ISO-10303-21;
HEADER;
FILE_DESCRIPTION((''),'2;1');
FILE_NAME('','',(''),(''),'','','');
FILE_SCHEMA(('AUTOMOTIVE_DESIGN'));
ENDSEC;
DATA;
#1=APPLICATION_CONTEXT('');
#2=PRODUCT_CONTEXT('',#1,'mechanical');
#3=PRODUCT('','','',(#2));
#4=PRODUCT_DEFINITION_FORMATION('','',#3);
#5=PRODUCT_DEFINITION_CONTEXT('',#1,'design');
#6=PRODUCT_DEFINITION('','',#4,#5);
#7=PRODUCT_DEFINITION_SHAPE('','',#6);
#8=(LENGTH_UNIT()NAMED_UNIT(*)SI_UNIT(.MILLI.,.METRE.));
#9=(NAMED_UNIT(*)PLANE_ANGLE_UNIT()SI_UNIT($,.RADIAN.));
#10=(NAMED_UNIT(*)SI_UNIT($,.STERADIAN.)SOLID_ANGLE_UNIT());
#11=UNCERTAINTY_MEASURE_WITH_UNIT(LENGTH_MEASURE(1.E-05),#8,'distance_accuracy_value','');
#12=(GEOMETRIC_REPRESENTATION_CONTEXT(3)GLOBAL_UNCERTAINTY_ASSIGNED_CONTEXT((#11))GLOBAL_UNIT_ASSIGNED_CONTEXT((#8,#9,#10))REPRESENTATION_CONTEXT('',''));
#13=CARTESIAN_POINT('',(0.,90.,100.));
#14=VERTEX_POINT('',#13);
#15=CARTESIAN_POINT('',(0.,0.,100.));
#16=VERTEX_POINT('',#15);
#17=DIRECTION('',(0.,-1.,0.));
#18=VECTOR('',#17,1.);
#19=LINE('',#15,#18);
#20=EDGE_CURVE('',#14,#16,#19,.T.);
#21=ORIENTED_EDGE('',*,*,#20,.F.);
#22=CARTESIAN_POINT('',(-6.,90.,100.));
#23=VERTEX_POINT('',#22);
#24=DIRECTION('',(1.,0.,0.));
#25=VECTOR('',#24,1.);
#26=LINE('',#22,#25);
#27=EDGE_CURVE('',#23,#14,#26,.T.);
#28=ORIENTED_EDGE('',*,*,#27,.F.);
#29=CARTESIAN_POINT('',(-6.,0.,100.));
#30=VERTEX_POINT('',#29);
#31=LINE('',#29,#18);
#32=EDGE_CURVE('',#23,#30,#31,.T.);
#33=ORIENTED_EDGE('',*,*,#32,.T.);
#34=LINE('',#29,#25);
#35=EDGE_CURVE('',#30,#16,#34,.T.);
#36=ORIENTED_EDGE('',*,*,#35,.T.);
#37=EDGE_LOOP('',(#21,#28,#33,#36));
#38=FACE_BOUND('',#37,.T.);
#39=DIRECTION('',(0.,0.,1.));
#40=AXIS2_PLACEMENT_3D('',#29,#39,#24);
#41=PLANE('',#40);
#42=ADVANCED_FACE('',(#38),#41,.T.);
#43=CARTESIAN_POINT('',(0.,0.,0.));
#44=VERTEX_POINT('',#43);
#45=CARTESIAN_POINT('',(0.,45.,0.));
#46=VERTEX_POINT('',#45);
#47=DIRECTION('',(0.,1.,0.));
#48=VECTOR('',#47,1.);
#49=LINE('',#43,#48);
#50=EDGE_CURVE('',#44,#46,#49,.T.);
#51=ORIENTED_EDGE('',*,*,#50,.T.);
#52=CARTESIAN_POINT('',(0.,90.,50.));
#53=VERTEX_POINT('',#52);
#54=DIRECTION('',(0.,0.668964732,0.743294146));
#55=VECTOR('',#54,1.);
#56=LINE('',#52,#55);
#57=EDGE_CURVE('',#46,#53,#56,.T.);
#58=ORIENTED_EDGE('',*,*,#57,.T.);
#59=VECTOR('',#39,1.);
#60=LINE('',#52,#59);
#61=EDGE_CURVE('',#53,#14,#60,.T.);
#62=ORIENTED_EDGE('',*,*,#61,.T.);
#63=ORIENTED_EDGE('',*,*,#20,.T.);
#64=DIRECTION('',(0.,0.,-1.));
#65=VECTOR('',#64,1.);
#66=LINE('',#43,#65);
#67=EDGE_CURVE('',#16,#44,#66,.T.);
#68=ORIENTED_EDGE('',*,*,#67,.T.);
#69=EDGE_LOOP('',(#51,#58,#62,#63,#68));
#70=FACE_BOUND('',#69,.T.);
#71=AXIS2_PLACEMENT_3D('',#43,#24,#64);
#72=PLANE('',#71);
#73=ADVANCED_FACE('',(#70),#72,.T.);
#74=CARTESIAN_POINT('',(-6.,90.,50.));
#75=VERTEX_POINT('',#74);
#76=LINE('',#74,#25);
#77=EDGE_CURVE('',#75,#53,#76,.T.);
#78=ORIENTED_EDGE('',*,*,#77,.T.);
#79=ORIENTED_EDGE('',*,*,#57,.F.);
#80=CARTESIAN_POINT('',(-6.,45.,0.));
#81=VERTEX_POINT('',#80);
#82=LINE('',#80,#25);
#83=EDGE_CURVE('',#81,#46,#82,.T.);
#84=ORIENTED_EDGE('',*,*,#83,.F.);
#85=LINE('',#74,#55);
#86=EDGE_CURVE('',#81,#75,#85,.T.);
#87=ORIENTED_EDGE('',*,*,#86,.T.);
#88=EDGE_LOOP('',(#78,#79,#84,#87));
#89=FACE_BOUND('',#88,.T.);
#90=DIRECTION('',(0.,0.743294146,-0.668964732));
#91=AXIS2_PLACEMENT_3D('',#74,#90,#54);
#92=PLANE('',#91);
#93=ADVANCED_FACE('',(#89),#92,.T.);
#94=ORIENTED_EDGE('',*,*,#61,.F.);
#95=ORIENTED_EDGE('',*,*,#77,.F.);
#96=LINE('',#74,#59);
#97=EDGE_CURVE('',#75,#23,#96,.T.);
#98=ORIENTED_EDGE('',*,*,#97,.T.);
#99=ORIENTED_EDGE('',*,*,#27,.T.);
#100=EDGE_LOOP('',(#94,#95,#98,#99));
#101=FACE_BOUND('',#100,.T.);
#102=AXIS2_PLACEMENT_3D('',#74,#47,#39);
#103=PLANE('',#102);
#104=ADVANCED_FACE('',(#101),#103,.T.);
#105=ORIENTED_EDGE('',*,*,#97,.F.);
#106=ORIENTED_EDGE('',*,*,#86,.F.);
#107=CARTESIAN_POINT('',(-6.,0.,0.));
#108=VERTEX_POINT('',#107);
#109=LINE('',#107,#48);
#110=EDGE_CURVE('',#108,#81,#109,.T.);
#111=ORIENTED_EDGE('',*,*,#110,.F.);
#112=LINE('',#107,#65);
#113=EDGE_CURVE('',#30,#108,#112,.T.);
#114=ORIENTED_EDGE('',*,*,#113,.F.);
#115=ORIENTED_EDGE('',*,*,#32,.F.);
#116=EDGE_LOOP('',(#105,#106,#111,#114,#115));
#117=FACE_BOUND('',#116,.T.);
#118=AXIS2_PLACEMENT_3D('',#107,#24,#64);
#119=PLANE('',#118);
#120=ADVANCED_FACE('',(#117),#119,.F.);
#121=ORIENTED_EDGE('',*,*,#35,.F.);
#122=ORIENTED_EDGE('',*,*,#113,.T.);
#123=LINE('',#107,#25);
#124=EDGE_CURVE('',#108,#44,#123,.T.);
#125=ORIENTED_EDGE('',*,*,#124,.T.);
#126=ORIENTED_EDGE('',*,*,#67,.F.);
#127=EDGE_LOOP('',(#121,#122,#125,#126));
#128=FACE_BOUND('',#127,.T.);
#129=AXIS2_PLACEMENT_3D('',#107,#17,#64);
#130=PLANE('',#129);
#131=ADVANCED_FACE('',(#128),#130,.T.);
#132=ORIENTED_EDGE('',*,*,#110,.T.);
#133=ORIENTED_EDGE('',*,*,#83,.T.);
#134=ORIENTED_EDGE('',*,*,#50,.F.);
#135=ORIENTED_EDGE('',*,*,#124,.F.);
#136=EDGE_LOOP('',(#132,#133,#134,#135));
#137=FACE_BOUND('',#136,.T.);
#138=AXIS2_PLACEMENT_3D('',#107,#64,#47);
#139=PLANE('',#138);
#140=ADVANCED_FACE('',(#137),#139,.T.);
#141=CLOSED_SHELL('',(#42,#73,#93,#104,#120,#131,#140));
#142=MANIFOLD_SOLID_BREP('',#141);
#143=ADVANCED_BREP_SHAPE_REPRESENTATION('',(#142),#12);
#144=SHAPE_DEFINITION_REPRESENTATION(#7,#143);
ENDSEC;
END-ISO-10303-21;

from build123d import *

# Parameters (mm, degrees)
SM_BASE_FLANGE_1_DEPTH = 6


# Sheet-metal steps are written as plain solids
with BuildPart() as part:
    # Sketch 1 → Базовая кромка1 (new body)
    with BuildSketch(Plane(origin=(0, 0, 0), x_dir=(0, 0, -1), z_dir=(1, 0, 0))):
        Polygon((-50, 90), (0, 45), (0, 0), (-100, 0), (-100, 90), align=None)
    extrude(amount=-SM_BASE_FLANGE_1_DEPTH)


solid = part.part
